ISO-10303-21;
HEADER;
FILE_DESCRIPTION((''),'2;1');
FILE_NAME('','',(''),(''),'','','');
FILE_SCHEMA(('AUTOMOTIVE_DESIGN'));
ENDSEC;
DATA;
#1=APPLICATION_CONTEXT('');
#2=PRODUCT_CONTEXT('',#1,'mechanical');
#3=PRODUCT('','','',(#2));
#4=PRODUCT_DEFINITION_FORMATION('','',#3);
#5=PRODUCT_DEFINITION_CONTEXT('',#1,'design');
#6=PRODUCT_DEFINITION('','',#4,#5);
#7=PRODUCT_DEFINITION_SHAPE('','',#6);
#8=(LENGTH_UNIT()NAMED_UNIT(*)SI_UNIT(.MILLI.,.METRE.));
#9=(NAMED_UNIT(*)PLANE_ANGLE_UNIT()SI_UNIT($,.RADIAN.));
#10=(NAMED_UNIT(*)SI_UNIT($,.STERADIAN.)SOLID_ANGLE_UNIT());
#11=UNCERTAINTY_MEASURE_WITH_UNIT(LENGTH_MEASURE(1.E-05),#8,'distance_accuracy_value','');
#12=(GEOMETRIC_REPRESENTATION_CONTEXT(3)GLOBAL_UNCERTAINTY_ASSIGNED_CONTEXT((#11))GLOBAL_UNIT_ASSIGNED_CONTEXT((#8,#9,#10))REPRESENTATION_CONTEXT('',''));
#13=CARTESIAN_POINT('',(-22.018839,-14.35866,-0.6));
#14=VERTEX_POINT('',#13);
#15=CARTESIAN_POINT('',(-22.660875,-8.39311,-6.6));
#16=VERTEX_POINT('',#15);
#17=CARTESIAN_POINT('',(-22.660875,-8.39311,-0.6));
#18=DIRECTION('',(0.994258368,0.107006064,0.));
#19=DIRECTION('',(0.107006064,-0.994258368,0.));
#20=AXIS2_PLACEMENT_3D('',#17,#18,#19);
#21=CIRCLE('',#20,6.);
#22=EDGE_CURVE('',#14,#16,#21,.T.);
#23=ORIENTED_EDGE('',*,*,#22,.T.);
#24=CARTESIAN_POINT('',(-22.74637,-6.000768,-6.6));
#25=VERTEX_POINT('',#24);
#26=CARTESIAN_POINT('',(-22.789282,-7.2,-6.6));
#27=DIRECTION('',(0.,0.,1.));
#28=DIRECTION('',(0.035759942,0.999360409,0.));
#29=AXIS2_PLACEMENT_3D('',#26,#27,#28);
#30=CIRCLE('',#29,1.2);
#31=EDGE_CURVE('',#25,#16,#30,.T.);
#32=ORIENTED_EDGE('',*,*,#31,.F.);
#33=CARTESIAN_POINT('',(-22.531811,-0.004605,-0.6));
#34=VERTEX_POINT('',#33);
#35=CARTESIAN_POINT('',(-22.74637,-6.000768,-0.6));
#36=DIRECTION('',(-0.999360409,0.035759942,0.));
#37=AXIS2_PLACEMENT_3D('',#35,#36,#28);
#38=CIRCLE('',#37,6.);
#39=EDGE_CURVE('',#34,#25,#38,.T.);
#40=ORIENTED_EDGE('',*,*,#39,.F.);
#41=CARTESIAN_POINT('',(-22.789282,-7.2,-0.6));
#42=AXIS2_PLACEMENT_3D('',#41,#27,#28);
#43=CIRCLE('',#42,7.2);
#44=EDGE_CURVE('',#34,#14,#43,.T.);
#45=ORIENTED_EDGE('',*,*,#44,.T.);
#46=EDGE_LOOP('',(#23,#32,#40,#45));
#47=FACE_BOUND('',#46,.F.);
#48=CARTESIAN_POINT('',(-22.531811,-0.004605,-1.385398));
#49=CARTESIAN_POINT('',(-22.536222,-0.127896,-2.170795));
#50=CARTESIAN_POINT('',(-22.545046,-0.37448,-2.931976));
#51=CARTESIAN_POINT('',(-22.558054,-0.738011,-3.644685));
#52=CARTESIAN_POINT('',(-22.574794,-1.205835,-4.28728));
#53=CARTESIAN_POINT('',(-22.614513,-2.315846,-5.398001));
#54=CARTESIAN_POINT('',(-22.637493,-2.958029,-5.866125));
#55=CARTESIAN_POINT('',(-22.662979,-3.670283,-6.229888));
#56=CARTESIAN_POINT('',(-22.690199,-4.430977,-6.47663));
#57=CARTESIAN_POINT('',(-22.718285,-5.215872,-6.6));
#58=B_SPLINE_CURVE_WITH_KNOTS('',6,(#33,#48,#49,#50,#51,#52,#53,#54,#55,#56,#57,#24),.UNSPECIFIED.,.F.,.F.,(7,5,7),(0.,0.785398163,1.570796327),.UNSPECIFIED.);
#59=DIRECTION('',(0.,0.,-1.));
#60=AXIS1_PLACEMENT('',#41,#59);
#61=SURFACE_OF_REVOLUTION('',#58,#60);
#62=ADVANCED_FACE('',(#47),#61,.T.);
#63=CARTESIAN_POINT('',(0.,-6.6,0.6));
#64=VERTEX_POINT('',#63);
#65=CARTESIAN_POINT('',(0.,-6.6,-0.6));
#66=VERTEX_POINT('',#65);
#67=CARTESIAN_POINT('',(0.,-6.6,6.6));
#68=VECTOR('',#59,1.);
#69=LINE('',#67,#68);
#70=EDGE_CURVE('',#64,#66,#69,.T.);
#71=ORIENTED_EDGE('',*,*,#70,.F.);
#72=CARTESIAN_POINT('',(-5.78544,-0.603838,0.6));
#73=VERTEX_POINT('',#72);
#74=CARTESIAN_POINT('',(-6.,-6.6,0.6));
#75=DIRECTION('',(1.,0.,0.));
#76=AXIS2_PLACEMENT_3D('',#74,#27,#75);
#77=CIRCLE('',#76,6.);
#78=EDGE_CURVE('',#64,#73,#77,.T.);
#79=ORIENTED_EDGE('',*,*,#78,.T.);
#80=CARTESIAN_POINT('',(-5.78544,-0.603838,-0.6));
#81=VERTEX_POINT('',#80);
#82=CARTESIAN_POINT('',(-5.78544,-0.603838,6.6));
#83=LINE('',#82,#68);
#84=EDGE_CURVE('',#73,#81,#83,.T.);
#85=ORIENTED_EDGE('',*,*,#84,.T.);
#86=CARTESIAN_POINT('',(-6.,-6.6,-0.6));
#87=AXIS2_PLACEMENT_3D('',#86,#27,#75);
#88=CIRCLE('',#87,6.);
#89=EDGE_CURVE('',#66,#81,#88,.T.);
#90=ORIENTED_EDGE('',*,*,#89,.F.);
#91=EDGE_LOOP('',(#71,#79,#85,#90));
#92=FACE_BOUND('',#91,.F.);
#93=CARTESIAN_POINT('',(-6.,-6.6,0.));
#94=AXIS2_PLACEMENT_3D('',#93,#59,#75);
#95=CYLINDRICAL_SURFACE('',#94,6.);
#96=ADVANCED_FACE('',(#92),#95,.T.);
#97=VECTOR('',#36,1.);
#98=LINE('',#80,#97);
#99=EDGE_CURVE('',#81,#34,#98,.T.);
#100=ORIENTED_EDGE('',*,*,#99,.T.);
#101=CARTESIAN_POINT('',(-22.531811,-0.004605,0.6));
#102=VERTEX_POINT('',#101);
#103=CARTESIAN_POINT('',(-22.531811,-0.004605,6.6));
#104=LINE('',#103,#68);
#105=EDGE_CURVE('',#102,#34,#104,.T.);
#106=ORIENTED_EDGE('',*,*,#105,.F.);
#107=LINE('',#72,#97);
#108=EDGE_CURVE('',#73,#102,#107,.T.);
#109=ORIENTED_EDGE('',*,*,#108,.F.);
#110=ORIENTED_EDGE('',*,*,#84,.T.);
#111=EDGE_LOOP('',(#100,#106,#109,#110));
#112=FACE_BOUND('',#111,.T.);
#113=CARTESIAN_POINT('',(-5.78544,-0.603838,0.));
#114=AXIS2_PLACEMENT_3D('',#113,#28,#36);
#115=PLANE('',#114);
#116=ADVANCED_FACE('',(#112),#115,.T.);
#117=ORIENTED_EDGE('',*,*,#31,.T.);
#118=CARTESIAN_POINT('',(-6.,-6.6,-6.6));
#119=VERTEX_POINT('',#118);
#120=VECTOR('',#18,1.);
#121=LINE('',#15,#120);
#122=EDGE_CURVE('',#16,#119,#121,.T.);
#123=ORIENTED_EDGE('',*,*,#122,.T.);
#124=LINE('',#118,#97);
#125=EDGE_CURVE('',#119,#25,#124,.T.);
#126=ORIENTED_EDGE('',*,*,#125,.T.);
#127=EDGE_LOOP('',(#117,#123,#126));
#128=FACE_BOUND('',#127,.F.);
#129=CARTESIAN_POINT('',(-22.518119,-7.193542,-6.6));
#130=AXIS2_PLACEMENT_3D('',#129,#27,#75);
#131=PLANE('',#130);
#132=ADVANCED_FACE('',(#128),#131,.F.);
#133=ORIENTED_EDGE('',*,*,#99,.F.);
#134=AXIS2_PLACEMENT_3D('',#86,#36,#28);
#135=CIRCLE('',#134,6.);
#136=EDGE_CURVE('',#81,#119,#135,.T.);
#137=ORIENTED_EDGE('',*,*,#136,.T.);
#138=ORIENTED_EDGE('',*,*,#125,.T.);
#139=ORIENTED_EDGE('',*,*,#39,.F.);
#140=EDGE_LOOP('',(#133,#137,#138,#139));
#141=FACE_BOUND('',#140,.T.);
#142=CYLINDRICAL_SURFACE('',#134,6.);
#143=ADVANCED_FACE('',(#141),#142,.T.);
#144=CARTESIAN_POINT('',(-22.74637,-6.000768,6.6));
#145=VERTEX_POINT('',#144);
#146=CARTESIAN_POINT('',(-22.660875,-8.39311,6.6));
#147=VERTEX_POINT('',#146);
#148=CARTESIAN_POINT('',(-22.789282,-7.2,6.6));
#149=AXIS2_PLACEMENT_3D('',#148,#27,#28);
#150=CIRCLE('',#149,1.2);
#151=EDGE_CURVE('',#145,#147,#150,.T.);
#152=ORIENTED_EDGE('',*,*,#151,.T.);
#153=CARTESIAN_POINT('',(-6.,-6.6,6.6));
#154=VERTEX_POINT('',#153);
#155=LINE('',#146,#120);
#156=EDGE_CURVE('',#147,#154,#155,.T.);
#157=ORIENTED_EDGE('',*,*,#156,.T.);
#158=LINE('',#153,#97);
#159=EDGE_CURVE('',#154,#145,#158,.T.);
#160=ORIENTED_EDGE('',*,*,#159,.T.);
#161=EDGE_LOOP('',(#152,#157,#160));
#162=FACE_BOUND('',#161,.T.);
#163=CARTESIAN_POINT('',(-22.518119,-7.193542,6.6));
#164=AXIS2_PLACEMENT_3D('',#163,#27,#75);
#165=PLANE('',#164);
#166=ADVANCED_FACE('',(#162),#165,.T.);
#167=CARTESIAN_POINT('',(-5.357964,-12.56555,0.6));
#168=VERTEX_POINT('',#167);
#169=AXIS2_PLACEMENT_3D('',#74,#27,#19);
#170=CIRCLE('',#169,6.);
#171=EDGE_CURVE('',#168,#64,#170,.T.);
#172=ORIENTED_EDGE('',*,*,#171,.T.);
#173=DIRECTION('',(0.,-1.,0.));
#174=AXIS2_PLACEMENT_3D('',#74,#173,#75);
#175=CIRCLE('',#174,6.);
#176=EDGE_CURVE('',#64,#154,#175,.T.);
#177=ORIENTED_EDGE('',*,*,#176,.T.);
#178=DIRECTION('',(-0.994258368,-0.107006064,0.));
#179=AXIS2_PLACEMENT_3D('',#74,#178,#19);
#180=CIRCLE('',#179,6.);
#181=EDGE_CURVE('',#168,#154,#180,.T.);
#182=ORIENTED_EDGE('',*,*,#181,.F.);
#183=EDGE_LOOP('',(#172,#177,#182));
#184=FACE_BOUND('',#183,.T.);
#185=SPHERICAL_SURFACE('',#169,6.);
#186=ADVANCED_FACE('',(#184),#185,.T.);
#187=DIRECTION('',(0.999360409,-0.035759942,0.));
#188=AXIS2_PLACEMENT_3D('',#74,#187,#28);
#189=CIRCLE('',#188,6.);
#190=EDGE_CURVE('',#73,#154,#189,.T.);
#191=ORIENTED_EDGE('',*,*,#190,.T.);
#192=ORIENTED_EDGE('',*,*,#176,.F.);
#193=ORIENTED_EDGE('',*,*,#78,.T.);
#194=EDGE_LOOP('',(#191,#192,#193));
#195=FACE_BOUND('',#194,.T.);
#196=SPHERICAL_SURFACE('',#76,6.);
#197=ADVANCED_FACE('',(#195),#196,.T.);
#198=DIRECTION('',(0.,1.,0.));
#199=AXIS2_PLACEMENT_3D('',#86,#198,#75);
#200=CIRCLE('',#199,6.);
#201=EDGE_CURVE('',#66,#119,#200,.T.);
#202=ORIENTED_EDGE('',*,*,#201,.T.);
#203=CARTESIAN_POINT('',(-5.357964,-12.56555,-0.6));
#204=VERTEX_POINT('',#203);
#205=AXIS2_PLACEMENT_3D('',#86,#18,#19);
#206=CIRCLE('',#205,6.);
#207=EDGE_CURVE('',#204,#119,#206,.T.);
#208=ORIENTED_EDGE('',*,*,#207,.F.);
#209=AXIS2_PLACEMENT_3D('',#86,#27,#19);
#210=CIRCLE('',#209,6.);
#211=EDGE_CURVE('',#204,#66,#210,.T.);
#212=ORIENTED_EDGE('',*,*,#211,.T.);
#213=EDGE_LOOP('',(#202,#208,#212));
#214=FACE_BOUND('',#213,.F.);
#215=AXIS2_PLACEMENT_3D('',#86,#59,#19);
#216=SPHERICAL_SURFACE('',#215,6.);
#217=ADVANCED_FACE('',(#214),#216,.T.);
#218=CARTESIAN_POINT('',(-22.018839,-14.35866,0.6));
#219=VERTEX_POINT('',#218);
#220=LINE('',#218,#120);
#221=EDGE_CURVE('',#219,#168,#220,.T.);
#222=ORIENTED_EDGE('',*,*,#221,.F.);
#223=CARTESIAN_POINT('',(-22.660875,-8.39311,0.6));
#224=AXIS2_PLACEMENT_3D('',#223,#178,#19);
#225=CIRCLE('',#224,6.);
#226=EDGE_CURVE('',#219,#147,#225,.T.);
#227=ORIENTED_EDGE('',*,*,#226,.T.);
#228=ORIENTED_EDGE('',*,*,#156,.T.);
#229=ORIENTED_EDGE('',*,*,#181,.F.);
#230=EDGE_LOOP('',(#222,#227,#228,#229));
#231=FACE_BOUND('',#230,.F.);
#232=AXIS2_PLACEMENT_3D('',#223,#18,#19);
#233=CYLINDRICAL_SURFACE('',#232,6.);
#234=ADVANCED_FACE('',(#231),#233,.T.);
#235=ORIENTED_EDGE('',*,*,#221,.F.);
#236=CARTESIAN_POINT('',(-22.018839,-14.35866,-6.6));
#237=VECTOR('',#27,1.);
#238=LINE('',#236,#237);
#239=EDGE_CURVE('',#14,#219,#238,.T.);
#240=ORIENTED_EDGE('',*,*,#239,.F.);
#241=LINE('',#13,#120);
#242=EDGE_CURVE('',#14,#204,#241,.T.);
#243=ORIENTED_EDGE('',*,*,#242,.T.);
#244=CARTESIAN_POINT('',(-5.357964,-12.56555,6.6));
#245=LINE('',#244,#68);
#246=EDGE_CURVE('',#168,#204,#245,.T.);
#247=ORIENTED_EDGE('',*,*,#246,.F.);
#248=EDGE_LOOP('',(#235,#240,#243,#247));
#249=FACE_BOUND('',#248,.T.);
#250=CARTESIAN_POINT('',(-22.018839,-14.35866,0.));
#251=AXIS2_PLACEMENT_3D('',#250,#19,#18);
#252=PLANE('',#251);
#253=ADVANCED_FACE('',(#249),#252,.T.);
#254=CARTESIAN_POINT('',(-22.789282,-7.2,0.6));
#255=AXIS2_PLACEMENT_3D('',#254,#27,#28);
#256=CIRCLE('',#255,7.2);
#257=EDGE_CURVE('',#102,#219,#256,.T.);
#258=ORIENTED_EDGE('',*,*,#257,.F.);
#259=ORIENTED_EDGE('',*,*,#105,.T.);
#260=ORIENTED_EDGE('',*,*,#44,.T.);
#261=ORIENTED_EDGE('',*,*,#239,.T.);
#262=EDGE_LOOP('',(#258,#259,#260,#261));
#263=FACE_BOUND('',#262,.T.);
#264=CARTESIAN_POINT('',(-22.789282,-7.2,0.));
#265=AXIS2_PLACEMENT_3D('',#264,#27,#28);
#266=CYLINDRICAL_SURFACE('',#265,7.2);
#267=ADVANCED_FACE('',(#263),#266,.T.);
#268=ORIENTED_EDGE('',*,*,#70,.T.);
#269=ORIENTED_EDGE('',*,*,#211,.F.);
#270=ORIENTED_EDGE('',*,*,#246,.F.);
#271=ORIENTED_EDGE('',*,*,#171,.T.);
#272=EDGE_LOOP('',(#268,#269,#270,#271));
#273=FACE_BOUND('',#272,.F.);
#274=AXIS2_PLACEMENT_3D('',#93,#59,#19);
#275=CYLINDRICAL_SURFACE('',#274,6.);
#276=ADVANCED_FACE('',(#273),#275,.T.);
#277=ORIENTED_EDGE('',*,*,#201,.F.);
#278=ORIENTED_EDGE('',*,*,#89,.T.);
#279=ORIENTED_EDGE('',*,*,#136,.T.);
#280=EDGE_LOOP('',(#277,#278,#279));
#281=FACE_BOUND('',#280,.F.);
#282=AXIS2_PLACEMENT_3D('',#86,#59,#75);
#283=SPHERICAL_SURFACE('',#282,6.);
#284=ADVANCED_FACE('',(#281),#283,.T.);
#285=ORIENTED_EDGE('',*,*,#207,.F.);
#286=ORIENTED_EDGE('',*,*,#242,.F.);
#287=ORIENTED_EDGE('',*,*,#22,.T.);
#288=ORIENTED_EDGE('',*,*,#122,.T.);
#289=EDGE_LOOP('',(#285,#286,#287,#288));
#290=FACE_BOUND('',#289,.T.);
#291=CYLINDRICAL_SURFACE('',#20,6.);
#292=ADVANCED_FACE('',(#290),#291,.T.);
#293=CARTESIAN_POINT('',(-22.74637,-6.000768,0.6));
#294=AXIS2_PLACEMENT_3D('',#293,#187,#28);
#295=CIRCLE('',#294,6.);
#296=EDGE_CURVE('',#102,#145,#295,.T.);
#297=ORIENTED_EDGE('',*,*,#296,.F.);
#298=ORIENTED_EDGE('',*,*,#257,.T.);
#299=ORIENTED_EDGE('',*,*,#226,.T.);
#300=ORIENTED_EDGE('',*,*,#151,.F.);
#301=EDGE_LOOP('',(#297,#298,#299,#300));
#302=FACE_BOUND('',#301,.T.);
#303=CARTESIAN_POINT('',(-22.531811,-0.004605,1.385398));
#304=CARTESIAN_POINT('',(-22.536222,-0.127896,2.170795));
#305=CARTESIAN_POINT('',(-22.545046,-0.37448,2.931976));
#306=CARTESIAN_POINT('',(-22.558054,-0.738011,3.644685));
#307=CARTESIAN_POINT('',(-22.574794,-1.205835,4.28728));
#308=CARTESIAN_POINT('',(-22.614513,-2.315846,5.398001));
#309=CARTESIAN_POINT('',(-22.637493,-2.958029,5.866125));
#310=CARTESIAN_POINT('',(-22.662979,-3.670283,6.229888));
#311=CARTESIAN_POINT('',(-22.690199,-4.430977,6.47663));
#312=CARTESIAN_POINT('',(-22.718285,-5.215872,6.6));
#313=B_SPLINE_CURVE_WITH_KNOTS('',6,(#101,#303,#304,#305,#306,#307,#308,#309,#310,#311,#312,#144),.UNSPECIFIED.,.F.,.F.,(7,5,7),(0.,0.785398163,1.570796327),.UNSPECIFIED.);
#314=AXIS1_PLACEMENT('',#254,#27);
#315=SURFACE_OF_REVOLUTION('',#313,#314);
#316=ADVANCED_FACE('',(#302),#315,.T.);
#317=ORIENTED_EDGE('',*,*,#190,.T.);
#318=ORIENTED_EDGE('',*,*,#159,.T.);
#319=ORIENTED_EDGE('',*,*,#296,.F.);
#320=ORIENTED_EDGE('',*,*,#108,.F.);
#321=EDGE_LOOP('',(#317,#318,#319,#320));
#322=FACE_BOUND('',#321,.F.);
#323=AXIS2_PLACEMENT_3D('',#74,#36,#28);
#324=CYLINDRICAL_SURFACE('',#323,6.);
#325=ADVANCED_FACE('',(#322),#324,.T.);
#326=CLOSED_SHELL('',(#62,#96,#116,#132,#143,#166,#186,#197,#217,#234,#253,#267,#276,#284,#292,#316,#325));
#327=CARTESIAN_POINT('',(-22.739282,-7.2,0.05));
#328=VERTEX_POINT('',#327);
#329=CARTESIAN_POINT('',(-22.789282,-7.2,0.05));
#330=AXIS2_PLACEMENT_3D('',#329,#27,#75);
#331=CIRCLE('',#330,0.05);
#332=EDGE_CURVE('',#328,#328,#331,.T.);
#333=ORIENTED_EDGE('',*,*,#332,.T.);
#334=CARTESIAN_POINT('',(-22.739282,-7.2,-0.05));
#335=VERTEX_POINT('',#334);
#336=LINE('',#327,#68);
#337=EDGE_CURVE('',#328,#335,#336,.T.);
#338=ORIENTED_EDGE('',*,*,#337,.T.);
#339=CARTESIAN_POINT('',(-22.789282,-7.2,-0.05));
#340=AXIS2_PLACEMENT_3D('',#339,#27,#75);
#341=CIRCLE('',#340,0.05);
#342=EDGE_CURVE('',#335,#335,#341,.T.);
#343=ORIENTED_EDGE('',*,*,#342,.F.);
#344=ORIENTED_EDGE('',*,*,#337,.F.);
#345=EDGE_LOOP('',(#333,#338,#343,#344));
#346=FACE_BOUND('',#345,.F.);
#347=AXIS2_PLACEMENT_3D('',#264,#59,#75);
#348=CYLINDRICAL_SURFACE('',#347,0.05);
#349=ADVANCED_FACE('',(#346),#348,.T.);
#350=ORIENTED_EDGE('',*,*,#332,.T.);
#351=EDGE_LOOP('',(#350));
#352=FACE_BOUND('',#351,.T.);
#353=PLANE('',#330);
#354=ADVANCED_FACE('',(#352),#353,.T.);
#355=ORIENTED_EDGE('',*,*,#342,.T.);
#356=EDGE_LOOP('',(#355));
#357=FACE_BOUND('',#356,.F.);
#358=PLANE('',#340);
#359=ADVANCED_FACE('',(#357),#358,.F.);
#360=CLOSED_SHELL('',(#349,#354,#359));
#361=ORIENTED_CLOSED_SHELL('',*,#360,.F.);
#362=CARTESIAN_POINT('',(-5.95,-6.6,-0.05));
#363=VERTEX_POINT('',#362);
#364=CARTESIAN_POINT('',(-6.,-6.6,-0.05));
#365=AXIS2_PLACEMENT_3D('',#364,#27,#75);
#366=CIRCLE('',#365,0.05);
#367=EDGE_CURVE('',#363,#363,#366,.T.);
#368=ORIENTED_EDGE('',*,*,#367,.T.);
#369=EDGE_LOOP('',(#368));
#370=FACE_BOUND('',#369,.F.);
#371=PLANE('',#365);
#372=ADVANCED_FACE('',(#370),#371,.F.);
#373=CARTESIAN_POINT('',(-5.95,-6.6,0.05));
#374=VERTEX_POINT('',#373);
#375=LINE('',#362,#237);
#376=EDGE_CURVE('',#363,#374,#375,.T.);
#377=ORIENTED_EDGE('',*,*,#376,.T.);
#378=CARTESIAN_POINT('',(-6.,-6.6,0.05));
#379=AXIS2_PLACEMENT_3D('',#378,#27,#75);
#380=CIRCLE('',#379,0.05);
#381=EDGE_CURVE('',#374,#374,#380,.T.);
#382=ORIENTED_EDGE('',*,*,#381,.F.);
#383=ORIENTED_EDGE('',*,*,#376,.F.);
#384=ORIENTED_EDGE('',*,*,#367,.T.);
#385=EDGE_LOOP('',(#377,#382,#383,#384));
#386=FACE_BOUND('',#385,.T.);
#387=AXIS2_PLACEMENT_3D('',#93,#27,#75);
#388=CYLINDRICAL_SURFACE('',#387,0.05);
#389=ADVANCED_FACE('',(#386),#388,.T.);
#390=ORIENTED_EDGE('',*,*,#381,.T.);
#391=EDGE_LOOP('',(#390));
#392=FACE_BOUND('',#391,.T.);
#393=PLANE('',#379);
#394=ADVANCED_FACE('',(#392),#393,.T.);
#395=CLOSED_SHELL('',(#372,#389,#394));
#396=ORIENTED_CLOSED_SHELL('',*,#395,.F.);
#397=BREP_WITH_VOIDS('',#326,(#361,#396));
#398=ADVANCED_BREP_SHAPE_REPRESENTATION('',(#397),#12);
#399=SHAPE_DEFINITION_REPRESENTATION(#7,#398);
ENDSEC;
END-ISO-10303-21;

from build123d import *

# Parameters (mm, degrees)
F1_R     = 0.05
F2_DEPTH = 6.6
F3_DEPTH = 0.05
F4_R     = 6


# Not quite as in the source:
# - a feature names something its author has since deleted; it is built from what else it names


with BuildPart() as f2:
    # F1 (on Top) → F2 (new body, symmetric)
    with BuildSketch(Plane.XY):
        with BuildLine():
            ThreePointArc((-22.0188386326, -14.3586602491), (-17.4326418198, -12.0110708593), (-15.5892822956, -7.2))
            ThreePointArc((-15.5892822956, -7.2), (-17.6078830939, -2.2006898163), (-22.5318107159, -0.004605057))
            ThreePointArc((-22.5318107159, -0.004605057), (-29.9846889937, -7.4571428571), (-22.0188386326, -14.3586602491))
        make_face()
        with Locations((-22.7892822956, -7.2)):
            Circle(F1_R, mode=Mode.SUBTRACT)
        with BuildLine():
            ThreePointArc((-22.5318107159, -0.004605057), (-17.6078830939, -2.2006898163), (-15.5892822956, -7.2))
            ThreePointArc((-15.5892822956, -7.2), (-17.4326418198, -12.0110708593), (-22.0188386326, -14.3586602491))
            Line((-22.0188386326, -14.3586602491), (-5.3579636142, -12.5655502076))
            ThreePointArc((-5.3579636142, -12.5655502076), (-11.9961722484, -6.8142857143), (-5.7854403503, -0.6038375475))
            Line((-5.7854403503, -0.6038375475), (-22.5318107159, -0.004605057))
        make_face()
        with BuildLine():
            ThreePointArc((0, -6.6), (-1.682167332, -2.4339081802), (-5.7854403503, -0.6038375475))
            ThreePointArc((-5.7854403503, -0.6038375475), (-11.9961722484, -6.8142857143), (-5.3579636142, -12.5655502076))
            ThreePointArc((-5.3579636142, -12.5655502076), (-1.5361329369, -10.6092257161), (0, -6.6))
        make_face()
        with Locations((-6, -6.6)):
            Circle(F1_R, mode=Mode.SUBTRACT)
        with Locations((-22.7892822956, -7.2)):
            Circle(F1_R)
        with Locations((-6, -6.6)):
            Circle(F1_R)
    extrude(amount=F2_DEPTH, both=True)

    # F1 (on Top) → F3 (cut, symmetric)
    with BuildSketch(Plane.XY):
        with Locations((-22.7892822956, -7.2)):
            Circle(F1_R)
        with Locations((-6, -6.6)):
            Circle(F1_R)
    extrude(amount=F3_DEPTH, both=True, mode=Mode.SUBTRACT)

    # F4
    f4_edges = [f2.edges().sort_by_distance(p)[0] for p in [
        (-29.984689, -7.457143, 6.6),
        (-13.688401, -13.462105, 6.6),
        (-0.003828, -6.385714, 6.6),
        (-14.158626, -0.304221, 6.6),
        (-29.984689, -7.457143, -6.6),
        (-13.688401, -13.462105, -6.6),
        (-0.003828, -6.385714, -6.6),
        (-14.158626, -0.304221, -6.6),
    ]]
    fillet(f4_edges, radius=F4_R)


solid = f2.part
